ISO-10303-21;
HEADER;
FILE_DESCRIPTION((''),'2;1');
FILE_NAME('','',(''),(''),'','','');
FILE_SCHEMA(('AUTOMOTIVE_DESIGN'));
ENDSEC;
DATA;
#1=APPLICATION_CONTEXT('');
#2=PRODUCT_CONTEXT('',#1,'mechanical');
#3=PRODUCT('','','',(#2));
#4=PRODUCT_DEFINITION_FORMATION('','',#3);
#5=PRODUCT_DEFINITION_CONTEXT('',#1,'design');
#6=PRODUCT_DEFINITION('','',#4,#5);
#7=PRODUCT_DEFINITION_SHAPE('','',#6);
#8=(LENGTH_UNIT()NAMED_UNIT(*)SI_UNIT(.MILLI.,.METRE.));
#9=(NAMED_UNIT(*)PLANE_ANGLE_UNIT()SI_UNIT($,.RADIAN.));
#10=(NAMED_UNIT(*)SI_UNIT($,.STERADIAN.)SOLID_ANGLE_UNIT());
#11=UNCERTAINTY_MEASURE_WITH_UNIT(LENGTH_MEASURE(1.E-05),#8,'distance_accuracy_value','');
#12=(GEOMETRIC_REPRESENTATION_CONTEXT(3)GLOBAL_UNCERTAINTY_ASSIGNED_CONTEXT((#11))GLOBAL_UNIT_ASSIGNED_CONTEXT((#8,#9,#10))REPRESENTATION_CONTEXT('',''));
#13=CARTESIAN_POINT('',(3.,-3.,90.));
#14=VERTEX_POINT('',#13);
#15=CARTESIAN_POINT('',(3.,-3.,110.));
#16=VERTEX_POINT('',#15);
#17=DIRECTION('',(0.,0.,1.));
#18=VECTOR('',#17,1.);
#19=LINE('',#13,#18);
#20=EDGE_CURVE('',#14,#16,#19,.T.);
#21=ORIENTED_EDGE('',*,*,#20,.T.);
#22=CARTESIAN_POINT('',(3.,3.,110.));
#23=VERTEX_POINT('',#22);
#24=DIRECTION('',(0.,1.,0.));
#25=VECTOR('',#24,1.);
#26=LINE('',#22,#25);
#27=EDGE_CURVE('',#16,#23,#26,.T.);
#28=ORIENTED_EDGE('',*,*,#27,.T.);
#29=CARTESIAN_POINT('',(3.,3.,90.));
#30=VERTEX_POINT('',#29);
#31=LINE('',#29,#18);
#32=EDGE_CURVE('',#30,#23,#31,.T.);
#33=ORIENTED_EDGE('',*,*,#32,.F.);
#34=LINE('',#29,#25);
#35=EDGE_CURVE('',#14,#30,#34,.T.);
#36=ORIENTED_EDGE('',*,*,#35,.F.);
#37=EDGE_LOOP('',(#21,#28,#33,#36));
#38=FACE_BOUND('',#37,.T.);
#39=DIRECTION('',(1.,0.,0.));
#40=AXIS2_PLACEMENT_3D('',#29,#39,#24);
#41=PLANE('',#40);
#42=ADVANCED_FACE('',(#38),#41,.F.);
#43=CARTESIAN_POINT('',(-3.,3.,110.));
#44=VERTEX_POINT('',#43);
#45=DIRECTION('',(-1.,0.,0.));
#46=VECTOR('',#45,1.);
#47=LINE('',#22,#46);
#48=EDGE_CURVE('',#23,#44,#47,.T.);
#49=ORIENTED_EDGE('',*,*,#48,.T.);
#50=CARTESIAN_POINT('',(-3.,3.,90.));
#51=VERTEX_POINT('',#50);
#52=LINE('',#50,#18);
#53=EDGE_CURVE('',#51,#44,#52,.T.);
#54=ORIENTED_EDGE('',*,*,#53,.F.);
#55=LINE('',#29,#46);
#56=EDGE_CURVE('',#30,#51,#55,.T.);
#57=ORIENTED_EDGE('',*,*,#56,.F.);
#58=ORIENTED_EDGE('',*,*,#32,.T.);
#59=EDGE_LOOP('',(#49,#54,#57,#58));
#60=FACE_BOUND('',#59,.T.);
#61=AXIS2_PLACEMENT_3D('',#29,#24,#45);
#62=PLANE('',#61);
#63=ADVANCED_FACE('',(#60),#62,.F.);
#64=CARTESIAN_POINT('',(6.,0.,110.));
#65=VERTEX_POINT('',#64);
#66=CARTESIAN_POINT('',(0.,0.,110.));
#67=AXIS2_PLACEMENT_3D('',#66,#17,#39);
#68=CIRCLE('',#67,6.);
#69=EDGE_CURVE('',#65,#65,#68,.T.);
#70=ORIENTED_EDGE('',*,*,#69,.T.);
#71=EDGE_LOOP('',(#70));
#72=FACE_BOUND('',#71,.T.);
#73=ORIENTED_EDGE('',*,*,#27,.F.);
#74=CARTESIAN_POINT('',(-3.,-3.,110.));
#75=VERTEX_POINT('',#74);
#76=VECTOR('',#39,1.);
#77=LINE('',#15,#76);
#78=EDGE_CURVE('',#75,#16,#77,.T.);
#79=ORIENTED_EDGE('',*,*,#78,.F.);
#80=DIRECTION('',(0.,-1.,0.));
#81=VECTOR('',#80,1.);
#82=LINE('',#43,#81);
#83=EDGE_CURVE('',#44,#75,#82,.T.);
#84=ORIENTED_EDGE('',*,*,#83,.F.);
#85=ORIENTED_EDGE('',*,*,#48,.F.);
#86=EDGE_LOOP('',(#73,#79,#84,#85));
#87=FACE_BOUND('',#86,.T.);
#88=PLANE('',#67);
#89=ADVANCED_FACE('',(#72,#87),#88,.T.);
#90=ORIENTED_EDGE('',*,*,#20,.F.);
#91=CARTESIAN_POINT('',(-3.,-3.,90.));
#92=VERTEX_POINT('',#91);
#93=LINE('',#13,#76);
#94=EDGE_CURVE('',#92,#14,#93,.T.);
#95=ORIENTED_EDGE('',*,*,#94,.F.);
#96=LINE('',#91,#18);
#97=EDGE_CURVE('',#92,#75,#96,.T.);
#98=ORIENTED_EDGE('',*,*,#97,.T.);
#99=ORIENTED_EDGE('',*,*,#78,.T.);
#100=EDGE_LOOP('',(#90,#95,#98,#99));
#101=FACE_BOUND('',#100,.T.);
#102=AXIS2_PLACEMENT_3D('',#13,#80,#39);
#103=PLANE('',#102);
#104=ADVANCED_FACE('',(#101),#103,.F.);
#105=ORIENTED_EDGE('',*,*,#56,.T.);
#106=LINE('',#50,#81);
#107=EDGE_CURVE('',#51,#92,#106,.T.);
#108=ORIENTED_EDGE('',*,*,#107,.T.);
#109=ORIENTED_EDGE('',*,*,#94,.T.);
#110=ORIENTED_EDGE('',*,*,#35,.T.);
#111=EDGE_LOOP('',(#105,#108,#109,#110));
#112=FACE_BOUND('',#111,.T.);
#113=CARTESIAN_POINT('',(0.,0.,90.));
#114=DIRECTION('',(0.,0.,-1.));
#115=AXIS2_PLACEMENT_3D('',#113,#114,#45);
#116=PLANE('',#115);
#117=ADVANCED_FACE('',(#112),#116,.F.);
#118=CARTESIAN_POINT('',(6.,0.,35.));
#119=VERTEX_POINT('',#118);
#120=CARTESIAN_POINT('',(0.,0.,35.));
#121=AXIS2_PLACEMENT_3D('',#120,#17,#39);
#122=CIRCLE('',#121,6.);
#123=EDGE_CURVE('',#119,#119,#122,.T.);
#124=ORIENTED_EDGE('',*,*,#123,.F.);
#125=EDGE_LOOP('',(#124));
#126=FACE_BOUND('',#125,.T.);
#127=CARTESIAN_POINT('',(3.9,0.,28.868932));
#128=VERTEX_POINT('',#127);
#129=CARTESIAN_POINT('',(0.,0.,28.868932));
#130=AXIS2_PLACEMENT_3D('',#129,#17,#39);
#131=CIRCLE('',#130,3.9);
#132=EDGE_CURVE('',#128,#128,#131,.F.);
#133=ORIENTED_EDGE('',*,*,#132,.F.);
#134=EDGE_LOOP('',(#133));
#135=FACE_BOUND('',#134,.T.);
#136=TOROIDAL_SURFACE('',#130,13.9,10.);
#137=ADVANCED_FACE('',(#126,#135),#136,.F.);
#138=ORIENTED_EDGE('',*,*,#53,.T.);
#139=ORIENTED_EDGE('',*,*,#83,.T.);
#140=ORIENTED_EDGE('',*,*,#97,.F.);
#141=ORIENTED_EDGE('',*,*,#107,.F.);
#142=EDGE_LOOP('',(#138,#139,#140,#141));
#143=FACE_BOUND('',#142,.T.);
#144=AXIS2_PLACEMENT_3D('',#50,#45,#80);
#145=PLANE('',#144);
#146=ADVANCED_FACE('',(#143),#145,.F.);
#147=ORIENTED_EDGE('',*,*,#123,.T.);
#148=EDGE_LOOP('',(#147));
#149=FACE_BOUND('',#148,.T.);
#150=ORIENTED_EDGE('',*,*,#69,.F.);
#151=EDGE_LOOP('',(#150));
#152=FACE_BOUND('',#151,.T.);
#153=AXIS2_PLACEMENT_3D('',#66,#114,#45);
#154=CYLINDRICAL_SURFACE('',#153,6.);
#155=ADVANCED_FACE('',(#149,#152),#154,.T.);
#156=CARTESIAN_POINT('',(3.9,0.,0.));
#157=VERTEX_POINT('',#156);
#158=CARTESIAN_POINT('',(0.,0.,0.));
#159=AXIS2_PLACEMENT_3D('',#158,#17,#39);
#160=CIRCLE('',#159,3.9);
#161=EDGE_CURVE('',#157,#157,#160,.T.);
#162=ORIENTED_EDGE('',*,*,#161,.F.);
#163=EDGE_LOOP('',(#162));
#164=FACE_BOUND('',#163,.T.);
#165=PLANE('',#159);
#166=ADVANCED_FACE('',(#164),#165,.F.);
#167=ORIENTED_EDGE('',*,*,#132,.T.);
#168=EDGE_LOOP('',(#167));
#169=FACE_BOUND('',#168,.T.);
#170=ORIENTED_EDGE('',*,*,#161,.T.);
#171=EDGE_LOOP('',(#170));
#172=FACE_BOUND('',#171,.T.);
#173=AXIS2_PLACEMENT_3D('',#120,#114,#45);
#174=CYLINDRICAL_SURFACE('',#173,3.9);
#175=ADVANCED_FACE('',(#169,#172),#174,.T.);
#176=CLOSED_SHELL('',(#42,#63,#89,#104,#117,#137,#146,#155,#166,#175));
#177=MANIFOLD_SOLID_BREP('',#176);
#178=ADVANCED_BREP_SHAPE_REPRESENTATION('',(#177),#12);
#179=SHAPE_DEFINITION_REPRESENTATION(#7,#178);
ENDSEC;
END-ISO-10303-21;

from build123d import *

# Parameters (mm, degrees)
SKETCH5_R           = 3.9
BOSS_EXTRUDE4_DEPTH = 35
SKETCH6_R           = 6
BOSS_EXTRUDE5_DEPTH = 75
FILLET1_R           = 10
SKETCH7_W           = 6
SKETCH7_H           = 6
CUT_EXTRUDE1_DEPTH  = 20


with BuildPart() as part:
    # Sketch5 → Boss-Extrude4 (new body)
    with BuildSketch(Plane.XY):
        Circle(SKETCH5_R)
    extrude(amount=BOSS_EXTRUDE4_DEPTH)

    # Sketch6 → Boss-Extrude5 (add)
    with BuildSketch(Plane.XY.offset(35)):
        Circle(SKETCH6_R)
    extrude(amount=BOSS_EXTRUDE5_DEPTH)

    # Fillet1
    # the kernel refuses this fillet: 10 mm, written as the material it adds along each edge
    with BuildSketch(Plane(origin=(0, 0, 35), x_dir=(1, 0, 0), z_dir=(0, -1, 0))) as fillet1_piece_1:
        with BuildLine():
            CenterArc((13.9, -6.131068422), FILLET1_R, 142.185511494, 37.814488506)
            Line((3.9, -6.131068422), (3.7, -6.131068422))
            Line((3.7, -6.131068422), (3.7, 0))
            Line((3.7, 0), (3.9, 0.2))
            ThreePointArc((3.9, 0.2), (4.95, 0.2), (5.842, 0.122621368))
            Line((5.842, 0.122621368), (6, 0))
        make_face()
    revolve(axis=Axis((0, 0, 35), (0, 0, 1)))

    # Sketch7 → Cut-Extrude1 (cut)
    with BuildSketch(Plane.XY.offset(110)):
        Rectangle(SKETCH7_W, SKETCH7_H)
    extrude(amount=-CUT_EXTRUDE1_DEPTH, mode=Mode.SUBTRACT)


solid = part.part
